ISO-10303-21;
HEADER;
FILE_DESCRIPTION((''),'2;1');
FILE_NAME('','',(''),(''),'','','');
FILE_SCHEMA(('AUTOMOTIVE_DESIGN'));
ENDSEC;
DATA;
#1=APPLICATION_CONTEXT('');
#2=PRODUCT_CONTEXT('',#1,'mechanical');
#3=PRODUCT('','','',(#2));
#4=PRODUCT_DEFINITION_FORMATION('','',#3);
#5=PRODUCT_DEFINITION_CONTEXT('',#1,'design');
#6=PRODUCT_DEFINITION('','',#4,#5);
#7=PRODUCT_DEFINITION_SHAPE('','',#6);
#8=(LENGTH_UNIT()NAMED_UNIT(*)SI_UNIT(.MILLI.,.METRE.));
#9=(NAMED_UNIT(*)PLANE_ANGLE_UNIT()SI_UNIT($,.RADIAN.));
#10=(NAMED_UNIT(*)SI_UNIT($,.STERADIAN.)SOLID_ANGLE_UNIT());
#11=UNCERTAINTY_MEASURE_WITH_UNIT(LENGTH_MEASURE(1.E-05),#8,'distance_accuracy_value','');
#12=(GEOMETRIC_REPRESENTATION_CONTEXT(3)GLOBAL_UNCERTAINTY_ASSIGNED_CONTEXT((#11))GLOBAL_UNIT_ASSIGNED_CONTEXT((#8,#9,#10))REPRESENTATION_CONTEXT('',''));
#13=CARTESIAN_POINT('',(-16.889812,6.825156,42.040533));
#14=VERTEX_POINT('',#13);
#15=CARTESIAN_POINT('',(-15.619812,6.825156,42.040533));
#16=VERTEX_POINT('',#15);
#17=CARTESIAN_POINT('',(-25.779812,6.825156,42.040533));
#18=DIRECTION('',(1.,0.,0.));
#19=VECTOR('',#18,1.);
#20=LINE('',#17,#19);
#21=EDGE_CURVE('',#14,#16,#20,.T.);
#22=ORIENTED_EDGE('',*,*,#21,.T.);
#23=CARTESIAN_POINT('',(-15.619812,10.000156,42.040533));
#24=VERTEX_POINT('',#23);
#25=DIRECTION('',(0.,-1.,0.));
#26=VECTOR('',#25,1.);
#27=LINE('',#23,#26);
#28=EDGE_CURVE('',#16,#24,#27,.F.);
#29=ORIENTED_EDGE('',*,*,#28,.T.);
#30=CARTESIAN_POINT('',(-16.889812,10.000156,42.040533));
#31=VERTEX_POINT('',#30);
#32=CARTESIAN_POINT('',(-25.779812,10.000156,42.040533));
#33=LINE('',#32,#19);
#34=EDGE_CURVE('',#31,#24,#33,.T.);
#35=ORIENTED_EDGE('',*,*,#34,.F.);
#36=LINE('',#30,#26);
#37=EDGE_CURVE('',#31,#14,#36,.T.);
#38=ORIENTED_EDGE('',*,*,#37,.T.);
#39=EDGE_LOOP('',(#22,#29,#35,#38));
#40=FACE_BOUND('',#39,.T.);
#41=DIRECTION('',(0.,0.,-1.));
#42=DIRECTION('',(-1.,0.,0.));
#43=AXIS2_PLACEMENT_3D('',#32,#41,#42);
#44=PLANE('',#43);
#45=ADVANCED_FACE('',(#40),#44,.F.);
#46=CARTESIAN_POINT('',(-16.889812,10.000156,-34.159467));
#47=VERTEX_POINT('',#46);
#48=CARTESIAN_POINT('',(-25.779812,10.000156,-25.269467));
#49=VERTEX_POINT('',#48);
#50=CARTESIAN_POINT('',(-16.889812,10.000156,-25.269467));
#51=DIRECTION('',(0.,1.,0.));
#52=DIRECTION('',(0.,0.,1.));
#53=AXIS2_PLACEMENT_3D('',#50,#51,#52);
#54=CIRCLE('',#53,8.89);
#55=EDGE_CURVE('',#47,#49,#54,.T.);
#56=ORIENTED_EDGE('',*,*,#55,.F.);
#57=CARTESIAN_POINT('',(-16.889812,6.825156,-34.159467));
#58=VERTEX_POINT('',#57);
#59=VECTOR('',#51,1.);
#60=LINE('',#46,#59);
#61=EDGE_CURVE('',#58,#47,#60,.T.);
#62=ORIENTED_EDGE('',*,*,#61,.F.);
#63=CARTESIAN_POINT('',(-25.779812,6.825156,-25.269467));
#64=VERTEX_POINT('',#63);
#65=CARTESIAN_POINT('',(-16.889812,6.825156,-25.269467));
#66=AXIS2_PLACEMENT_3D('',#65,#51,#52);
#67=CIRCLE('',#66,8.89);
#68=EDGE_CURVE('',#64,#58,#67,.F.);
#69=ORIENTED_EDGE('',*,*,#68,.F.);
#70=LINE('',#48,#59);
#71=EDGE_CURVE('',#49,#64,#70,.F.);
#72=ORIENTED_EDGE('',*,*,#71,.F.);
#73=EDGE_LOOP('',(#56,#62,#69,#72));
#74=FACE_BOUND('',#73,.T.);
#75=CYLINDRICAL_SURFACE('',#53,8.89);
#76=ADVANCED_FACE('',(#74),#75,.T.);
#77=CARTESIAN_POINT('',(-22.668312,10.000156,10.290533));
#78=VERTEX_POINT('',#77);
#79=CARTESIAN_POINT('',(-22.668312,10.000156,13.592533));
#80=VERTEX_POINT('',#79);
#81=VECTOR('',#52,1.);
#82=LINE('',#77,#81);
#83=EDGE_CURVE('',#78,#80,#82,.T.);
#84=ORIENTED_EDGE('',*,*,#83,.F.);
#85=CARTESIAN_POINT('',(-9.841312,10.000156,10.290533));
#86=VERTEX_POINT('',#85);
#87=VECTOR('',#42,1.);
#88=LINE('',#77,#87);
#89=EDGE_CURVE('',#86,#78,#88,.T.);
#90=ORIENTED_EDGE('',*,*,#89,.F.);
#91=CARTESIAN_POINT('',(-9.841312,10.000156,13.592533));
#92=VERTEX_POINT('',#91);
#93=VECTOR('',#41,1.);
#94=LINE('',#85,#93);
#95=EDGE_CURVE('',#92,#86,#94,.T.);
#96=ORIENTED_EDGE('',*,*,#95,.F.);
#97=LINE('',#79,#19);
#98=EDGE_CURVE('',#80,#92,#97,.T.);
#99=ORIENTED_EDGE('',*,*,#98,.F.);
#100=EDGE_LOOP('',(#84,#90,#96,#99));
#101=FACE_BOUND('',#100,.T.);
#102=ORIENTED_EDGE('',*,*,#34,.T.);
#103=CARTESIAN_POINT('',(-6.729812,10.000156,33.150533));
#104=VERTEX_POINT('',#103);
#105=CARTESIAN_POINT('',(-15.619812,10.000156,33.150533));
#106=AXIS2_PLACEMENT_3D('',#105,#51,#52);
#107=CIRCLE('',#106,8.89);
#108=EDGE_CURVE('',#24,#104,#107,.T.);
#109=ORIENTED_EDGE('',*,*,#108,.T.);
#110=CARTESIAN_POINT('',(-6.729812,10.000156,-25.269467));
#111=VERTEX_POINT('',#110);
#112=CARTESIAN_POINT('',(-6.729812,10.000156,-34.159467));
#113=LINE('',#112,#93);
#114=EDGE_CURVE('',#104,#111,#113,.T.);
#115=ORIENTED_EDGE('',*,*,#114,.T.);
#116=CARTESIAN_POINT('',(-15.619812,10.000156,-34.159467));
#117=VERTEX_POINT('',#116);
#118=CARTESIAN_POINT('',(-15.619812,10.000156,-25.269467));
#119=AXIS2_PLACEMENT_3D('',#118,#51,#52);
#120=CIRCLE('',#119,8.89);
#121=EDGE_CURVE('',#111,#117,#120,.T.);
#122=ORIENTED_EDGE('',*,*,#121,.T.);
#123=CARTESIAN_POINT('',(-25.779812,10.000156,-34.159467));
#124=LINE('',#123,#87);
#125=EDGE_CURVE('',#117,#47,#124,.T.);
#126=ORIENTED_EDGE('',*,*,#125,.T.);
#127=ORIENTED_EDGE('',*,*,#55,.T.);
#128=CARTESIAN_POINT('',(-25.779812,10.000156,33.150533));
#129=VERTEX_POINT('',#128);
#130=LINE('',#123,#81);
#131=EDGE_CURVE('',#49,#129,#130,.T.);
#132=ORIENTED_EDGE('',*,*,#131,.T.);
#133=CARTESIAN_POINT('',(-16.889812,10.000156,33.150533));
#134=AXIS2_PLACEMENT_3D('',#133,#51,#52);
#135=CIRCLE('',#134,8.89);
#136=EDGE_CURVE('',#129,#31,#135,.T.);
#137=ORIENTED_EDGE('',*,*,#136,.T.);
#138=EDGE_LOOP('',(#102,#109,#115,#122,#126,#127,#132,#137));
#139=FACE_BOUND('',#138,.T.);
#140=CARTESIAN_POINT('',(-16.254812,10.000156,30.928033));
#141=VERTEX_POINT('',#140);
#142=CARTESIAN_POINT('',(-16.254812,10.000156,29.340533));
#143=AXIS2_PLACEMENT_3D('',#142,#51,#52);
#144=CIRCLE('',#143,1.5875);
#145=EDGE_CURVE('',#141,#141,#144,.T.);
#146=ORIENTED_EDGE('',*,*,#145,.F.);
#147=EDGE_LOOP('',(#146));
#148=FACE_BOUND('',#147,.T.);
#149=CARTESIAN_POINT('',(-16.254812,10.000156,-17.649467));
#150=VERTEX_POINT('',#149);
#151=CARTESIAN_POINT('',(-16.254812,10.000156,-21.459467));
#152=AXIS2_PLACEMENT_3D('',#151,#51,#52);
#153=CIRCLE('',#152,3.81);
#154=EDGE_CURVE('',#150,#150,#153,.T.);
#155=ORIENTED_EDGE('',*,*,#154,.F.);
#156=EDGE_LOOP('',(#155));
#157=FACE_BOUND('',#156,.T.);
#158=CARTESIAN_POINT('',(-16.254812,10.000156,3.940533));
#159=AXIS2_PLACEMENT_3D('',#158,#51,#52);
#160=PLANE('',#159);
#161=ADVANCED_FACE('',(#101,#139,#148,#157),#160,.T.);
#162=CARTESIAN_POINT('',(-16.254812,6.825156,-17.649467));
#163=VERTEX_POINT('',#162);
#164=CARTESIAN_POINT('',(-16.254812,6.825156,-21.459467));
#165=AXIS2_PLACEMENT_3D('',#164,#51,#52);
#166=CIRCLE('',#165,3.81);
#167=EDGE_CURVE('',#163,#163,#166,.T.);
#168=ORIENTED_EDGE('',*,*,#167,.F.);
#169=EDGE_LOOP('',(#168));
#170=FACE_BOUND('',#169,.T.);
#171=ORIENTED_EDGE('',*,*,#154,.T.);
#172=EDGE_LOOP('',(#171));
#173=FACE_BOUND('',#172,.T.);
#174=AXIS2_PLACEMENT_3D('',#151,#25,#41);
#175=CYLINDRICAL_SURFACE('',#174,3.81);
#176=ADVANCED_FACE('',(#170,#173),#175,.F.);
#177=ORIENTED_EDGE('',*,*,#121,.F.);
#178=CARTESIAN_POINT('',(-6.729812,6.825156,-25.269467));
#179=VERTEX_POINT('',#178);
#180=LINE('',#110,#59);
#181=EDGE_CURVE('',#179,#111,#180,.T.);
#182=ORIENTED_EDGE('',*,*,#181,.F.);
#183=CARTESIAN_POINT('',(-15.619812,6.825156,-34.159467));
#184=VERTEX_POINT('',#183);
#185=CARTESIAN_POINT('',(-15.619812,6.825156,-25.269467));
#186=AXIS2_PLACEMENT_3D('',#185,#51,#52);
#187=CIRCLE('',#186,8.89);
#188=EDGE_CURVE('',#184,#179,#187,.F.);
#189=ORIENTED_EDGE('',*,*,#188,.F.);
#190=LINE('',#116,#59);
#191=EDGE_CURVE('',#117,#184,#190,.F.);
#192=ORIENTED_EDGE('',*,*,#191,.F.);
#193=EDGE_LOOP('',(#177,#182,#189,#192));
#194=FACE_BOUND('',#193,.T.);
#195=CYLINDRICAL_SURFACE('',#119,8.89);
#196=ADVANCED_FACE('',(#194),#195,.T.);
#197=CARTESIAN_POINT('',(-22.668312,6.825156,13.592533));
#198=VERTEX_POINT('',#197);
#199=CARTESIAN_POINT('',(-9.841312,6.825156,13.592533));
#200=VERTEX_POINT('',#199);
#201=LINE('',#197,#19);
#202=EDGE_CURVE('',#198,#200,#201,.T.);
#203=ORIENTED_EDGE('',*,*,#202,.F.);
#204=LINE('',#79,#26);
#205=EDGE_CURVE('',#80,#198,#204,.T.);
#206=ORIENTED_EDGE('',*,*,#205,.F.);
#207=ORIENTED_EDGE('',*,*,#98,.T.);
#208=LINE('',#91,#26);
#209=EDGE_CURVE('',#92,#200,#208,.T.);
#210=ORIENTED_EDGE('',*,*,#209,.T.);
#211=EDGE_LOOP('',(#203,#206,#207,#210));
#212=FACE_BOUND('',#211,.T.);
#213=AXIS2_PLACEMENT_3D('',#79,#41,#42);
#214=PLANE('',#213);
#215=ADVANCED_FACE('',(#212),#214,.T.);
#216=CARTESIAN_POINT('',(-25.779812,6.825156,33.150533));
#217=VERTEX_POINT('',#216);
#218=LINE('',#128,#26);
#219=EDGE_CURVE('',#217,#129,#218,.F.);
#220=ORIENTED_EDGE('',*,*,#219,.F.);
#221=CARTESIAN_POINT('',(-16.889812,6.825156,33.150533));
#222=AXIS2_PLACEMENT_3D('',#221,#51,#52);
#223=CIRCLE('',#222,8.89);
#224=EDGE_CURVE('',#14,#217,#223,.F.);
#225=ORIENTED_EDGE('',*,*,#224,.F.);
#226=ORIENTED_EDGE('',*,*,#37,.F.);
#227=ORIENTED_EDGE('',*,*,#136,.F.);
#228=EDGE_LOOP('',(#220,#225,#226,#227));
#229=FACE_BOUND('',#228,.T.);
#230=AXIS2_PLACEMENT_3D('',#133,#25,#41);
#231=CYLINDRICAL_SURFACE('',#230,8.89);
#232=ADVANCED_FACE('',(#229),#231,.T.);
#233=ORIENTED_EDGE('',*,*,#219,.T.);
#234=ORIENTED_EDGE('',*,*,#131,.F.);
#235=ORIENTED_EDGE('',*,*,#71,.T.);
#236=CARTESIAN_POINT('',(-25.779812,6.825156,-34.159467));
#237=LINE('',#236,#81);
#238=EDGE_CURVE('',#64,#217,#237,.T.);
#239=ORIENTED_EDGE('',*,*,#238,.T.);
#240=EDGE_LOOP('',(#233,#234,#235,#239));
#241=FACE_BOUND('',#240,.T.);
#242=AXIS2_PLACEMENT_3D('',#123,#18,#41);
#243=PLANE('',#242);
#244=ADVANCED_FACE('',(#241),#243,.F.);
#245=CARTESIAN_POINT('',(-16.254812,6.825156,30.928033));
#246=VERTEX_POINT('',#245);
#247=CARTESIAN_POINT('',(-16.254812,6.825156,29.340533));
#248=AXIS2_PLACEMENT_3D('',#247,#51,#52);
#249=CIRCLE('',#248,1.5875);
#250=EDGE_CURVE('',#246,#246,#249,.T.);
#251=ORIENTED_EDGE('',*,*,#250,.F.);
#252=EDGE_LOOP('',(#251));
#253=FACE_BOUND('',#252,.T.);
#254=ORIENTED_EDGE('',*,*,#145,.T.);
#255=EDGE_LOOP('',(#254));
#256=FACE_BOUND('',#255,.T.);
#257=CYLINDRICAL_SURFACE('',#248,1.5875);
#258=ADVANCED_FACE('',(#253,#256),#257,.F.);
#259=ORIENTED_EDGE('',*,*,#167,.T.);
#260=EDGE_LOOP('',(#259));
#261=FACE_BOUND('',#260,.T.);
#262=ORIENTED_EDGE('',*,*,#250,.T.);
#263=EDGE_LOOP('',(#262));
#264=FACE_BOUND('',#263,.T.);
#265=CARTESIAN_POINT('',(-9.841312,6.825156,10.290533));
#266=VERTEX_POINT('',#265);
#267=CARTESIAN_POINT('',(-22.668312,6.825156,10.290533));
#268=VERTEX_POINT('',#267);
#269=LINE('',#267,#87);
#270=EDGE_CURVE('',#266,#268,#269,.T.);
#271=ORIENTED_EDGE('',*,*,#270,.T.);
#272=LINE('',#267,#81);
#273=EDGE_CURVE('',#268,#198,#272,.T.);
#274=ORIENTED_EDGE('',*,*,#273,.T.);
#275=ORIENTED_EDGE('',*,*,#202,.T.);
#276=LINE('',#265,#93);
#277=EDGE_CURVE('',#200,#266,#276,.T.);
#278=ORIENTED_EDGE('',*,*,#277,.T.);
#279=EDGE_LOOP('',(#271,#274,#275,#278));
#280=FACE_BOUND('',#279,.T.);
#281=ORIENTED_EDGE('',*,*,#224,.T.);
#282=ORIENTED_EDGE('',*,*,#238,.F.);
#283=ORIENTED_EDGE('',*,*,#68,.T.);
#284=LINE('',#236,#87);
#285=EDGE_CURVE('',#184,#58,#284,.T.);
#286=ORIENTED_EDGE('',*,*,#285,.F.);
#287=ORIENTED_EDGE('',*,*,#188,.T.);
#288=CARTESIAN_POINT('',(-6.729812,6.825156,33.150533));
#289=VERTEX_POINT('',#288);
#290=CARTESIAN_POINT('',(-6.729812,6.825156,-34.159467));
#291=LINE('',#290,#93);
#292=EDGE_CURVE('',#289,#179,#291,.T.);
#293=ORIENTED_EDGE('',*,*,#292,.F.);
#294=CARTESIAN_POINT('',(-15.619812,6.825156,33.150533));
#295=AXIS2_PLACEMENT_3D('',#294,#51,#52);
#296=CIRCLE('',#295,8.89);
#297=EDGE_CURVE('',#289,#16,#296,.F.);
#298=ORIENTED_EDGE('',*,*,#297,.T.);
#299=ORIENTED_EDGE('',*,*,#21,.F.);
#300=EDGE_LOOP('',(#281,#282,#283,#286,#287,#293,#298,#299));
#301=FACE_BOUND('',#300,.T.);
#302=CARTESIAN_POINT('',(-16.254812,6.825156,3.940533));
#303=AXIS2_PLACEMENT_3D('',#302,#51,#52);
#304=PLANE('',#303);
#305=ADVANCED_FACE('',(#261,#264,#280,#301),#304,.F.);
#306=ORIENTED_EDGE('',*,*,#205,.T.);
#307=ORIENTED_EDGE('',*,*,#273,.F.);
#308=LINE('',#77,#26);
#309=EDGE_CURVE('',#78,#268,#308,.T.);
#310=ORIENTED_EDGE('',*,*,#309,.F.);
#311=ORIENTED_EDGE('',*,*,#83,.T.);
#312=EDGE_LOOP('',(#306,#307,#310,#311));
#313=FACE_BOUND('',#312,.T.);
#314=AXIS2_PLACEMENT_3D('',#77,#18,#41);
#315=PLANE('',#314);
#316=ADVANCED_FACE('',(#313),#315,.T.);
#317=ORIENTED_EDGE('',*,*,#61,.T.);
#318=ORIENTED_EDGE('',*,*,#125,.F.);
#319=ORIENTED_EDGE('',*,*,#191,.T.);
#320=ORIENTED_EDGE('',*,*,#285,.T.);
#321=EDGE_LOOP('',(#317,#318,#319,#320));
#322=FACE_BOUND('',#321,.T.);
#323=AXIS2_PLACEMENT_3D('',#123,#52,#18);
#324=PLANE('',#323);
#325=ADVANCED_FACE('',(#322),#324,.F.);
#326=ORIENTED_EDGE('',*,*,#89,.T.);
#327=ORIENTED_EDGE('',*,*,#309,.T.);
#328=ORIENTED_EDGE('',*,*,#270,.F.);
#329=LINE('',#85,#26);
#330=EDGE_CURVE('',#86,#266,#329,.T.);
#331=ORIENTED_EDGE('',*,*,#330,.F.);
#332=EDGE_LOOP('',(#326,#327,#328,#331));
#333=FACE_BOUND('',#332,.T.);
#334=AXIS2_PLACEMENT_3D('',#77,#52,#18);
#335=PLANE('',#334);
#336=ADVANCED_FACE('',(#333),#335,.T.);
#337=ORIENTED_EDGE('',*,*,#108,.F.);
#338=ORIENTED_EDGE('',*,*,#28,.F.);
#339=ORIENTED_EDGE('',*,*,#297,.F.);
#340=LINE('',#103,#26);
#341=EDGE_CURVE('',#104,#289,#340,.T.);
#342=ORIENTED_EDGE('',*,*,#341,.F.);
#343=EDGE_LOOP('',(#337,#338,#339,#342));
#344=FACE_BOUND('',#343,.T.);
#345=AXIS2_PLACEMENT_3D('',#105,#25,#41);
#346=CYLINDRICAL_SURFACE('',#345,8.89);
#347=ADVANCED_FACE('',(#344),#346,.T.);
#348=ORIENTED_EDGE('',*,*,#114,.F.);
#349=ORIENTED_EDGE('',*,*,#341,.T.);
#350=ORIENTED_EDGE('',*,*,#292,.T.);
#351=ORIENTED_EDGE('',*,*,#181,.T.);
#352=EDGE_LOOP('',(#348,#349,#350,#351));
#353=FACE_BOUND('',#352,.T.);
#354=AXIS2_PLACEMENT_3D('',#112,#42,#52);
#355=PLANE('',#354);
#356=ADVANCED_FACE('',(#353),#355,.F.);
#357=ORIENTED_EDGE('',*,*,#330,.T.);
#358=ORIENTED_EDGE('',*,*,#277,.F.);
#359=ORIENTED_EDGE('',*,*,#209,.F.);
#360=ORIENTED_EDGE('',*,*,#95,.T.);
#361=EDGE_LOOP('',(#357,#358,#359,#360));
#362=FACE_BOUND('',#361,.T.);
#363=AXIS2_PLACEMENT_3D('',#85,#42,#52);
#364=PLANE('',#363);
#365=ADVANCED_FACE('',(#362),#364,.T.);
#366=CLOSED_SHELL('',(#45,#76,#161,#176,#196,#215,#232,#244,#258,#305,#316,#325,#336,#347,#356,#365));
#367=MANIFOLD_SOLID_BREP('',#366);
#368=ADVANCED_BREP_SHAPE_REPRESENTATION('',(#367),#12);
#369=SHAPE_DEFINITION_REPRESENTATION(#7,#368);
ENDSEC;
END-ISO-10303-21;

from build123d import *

# Parameters (mm, degrees)
STEM_START                = 6.825155764
STEM_OTHER_SIDE_OUTLINE_W = 12.827
STEM_OTHER_SIDE_OUTLINE_H = 3.302
STEM_OTHER_SIDE_OUTLINE_R = 3.81
STEM_OTHER_SIDE_DEPTH     = 3.175
SKETCH2_R                 = 1.5875
CUT_EXTRUDE1_DEPTH        = 3.175
FILLET1_R                 = 8.89
FILLET2_R                 = 8.89


# Read off the part's stored shape, not the designer's step: Stem Other Side
with BuildPart() as part:
    # Stem Other Side outline → Stem Other Side (new body)
    with BuildSketch(Plane(origin=(0, 0, 0), x_dir=(1, 0, 0), z_dir=(0, 1, 0)).offset(STEM_START)):
        with BuildLine():
            Line((-15.619811821, 34.159467437), (-16.889811821, 34.159467437))
            ThreePointArc((-16.889811821, 34.159467437), (-23.175991106, 31.555646722), (-25.779811821, 25.269467437))
            Line((-25.779811821, 25.269467437), (-25.779811821, -42.040532563))
            Line((-25.779811821, -42.040532563), (-6.729811821, -42.040532563))
            Line((-6.729811821, -42.040532563), (-6.729811821, 25.269467437))
            ThreePointArc((-6.729811821, 25.269467437), (-9.333632536, 31.555646722), (-15.619811821, 34.159467437))
        make_face()
        with Locations((-16.254811821, -11.941532563)):
            Rectangle(STEM_OTHER_SIDE_OUTLINE_W, STEM_OTHER_SIDE_OUTLINE_H, mode=Mode.SUBTRACT)
        with Locations((-16.254811821, 21.459467437)):
            Circle(STEM_OTHER_SIDE_OUTLINE_R, mode=Mode.SUBTRACT)
    extrude(amount=STEM_OTHER_SIDE_DEPTH)

    # Sketch2 → Cut-Extrude1 (cut)
    with BuildSketch(Plane(origin=(0, 10.000155764, 0), x_dir=(1, 0, 0), z_dir=(0, 1, 0))):
        with Locations(Location((-16.254811821, -29.340532563, 0), (0, 0, 270))):
            Circle(SKETCH2_R)
    extrude(amount=-CUT_EXTRUDE1_DEPTH, mode=Mode.SUBTRACT)

    # Fillet1
    fillet1_edges = [part.edges().sort_by_distance(p)[0] for p in [
        (-6.729811821, 8.412655764, 42.040532563),
    ]]
    fillet(fillet1_edges, radius=FILLET1_R)

    # Fillet2
    fillet2_edges = [part.edges().sort_by_distance(p)[0] for p in [
        (-25.779811821, 8.412655764, 42.040532563),
    ]]
    fillet(fillet2_edges, radius=FILLET2_R)


solid = part.part
